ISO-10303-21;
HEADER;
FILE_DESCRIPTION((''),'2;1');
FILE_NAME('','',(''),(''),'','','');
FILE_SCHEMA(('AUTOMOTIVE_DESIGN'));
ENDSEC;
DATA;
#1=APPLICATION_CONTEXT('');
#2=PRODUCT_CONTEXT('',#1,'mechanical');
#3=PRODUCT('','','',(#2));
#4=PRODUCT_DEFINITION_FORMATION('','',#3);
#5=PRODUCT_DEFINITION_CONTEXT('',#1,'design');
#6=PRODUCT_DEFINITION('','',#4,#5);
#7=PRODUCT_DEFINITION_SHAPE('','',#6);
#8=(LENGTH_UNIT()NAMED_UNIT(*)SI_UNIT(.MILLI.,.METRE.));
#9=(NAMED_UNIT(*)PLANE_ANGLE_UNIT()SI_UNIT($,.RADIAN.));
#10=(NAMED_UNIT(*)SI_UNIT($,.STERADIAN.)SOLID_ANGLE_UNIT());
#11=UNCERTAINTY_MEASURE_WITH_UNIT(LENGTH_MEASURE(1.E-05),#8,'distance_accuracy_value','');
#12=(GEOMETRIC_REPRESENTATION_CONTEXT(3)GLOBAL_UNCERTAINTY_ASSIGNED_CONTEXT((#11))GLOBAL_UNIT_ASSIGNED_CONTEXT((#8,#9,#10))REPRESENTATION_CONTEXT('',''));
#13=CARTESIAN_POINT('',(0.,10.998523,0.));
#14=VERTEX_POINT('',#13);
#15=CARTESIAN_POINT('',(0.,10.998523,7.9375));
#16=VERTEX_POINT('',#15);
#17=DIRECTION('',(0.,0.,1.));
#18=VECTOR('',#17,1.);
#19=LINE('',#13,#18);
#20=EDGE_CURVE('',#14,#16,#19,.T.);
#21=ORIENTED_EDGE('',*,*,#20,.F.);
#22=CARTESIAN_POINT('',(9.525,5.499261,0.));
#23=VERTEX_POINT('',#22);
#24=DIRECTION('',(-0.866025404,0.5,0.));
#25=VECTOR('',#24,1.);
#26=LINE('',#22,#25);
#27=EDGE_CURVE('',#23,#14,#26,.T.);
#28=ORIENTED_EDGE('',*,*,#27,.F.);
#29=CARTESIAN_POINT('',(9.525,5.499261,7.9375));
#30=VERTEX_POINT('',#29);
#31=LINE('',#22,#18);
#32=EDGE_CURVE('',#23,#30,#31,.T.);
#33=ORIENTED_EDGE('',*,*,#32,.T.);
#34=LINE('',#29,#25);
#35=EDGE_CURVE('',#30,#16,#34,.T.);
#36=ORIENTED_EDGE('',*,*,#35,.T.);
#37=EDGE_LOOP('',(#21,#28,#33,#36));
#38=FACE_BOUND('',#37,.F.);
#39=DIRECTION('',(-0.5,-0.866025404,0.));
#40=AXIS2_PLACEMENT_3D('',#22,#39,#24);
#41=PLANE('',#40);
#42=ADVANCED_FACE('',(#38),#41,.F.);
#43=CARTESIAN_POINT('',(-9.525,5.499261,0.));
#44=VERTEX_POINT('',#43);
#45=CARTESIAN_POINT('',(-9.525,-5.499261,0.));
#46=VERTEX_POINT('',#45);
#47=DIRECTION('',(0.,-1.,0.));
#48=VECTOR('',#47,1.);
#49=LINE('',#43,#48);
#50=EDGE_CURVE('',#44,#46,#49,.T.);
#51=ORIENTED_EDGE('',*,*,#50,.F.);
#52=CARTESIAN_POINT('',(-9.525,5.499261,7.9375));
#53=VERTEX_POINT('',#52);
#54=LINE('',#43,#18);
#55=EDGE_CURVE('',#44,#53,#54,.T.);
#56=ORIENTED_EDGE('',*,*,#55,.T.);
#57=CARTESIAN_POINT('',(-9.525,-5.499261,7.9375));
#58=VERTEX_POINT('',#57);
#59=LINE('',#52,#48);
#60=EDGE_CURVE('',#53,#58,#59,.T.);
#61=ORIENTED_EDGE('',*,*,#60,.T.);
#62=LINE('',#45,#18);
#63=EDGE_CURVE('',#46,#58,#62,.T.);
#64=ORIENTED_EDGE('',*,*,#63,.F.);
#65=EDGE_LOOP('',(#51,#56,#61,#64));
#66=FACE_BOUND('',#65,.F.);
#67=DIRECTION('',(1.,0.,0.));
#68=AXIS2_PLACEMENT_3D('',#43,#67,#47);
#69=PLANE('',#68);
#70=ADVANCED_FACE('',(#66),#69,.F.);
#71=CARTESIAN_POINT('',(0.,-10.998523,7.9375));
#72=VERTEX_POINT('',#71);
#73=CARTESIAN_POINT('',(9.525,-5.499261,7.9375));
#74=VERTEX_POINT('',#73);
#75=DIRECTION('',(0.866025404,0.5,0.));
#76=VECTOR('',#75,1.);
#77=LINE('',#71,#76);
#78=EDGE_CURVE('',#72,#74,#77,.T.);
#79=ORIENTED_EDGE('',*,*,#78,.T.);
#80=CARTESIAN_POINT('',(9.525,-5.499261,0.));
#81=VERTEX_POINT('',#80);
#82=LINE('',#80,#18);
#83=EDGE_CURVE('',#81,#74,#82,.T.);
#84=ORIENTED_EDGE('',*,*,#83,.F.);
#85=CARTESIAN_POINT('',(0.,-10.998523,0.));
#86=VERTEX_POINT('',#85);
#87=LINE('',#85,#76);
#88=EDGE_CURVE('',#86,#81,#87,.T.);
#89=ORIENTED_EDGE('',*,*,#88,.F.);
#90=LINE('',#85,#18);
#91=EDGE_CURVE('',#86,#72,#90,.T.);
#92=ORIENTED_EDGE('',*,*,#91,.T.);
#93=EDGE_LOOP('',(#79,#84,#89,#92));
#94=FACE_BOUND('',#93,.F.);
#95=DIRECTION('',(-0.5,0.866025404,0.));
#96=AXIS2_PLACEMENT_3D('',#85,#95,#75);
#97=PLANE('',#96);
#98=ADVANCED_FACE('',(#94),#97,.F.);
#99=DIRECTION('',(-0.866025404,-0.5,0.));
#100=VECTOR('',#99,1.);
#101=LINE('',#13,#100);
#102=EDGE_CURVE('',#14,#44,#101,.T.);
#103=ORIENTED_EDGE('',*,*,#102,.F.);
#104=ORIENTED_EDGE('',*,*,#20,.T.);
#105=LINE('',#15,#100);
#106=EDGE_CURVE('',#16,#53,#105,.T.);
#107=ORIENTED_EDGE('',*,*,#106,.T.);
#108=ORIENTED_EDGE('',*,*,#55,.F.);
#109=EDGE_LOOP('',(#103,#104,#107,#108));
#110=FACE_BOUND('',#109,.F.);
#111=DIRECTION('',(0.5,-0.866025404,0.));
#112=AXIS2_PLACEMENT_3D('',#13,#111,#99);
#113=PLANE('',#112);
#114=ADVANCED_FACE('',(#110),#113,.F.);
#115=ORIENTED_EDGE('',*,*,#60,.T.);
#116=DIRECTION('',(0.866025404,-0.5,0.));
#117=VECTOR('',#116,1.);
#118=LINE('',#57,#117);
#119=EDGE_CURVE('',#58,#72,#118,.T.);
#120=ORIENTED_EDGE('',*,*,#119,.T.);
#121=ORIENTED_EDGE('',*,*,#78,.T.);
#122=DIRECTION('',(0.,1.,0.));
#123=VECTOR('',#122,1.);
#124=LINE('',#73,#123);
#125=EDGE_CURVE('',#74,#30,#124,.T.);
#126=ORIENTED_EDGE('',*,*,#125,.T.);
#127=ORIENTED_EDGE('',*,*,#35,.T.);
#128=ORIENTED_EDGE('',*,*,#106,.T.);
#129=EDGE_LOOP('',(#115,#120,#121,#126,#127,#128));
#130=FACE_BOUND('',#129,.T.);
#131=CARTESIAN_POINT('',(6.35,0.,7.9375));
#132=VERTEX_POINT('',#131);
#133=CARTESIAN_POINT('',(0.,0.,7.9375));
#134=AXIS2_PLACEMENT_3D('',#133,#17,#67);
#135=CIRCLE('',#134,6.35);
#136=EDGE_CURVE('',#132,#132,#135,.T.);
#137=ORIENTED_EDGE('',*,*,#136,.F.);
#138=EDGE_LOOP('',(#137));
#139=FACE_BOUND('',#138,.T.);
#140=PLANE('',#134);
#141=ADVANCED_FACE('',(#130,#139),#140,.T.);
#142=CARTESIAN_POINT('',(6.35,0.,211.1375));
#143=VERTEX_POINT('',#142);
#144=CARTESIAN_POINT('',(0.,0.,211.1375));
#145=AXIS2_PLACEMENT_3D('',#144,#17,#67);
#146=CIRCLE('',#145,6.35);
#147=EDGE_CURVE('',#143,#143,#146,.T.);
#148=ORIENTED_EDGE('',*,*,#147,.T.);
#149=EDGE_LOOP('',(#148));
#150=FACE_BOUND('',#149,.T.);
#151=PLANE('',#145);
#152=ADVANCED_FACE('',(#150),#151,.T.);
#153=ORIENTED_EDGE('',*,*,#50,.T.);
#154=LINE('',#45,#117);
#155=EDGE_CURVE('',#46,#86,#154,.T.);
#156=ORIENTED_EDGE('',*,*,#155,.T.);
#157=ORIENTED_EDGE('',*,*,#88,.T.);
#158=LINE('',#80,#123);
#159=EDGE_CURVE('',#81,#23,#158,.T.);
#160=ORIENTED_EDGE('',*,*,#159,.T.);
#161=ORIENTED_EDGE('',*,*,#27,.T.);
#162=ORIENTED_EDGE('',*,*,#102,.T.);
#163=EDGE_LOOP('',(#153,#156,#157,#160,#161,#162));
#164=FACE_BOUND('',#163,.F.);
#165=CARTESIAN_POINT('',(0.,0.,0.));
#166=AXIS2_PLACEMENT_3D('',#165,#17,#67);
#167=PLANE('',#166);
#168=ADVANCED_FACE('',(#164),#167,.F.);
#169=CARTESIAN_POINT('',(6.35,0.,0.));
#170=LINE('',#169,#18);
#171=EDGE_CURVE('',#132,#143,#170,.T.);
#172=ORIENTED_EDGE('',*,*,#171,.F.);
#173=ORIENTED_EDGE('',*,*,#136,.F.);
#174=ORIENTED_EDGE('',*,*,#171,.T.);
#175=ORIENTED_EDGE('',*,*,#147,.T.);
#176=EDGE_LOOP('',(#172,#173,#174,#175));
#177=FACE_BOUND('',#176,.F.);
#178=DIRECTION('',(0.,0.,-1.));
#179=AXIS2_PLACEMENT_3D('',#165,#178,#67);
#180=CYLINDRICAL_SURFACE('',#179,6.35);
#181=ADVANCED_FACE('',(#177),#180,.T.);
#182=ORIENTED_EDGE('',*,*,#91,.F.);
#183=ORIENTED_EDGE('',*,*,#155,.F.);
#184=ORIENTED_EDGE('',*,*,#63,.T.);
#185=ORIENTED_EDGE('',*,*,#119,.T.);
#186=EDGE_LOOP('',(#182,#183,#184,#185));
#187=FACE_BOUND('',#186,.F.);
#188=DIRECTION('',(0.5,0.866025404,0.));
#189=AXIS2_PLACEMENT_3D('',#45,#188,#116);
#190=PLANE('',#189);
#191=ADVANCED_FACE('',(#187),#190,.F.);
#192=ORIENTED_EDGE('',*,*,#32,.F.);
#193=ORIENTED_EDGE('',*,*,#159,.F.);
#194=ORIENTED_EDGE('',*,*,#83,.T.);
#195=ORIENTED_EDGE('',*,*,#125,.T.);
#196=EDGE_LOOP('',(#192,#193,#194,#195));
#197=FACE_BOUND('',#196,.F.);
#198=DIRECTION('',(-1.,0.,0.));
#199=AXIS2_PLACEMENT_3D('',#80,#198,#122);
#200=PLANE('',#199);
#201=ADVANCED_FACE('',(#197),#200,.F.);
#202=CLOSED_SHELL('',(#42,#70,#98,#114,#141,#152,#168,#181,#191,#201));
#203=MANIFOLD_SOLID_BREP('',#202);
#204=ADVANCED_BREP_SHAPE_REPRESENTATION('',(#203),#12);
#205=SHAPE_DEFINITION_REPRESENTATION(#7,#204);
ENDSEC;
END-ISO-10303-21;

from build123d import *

# Parameters (mm, degrees)
F1_R     = 6.35
F2_DEPTH = 7.9375
F3_DEPTH = 211.1375


# Not quite as in the source:
# - a variable given as a bare number and used for a length is read in inches; the dataset says mm whatever the document's units were


with BuildPart() as f2:
    # F1 (on Top) → F2 (new body)
    with BuildSketch(Plane.XY):
        Polygon((9.525, -5.499261314), (9.525, 5.499261314), (0, 10.9985226281), (-9.525, 5.499261314), (-9.525, -5.499261314), (0, -10.9985226281), align=None)
        Circle(F1_R, mode=Mode.SUBTRACT)
    extrude(amount=F2_DEPTH)

    # F1 (on Top) → F3 (join)
    with BuildSketch(Plane.XY):
        Circle(F1_R)
    extrude(amount=F3_DEPTH)


solid = f2.part
